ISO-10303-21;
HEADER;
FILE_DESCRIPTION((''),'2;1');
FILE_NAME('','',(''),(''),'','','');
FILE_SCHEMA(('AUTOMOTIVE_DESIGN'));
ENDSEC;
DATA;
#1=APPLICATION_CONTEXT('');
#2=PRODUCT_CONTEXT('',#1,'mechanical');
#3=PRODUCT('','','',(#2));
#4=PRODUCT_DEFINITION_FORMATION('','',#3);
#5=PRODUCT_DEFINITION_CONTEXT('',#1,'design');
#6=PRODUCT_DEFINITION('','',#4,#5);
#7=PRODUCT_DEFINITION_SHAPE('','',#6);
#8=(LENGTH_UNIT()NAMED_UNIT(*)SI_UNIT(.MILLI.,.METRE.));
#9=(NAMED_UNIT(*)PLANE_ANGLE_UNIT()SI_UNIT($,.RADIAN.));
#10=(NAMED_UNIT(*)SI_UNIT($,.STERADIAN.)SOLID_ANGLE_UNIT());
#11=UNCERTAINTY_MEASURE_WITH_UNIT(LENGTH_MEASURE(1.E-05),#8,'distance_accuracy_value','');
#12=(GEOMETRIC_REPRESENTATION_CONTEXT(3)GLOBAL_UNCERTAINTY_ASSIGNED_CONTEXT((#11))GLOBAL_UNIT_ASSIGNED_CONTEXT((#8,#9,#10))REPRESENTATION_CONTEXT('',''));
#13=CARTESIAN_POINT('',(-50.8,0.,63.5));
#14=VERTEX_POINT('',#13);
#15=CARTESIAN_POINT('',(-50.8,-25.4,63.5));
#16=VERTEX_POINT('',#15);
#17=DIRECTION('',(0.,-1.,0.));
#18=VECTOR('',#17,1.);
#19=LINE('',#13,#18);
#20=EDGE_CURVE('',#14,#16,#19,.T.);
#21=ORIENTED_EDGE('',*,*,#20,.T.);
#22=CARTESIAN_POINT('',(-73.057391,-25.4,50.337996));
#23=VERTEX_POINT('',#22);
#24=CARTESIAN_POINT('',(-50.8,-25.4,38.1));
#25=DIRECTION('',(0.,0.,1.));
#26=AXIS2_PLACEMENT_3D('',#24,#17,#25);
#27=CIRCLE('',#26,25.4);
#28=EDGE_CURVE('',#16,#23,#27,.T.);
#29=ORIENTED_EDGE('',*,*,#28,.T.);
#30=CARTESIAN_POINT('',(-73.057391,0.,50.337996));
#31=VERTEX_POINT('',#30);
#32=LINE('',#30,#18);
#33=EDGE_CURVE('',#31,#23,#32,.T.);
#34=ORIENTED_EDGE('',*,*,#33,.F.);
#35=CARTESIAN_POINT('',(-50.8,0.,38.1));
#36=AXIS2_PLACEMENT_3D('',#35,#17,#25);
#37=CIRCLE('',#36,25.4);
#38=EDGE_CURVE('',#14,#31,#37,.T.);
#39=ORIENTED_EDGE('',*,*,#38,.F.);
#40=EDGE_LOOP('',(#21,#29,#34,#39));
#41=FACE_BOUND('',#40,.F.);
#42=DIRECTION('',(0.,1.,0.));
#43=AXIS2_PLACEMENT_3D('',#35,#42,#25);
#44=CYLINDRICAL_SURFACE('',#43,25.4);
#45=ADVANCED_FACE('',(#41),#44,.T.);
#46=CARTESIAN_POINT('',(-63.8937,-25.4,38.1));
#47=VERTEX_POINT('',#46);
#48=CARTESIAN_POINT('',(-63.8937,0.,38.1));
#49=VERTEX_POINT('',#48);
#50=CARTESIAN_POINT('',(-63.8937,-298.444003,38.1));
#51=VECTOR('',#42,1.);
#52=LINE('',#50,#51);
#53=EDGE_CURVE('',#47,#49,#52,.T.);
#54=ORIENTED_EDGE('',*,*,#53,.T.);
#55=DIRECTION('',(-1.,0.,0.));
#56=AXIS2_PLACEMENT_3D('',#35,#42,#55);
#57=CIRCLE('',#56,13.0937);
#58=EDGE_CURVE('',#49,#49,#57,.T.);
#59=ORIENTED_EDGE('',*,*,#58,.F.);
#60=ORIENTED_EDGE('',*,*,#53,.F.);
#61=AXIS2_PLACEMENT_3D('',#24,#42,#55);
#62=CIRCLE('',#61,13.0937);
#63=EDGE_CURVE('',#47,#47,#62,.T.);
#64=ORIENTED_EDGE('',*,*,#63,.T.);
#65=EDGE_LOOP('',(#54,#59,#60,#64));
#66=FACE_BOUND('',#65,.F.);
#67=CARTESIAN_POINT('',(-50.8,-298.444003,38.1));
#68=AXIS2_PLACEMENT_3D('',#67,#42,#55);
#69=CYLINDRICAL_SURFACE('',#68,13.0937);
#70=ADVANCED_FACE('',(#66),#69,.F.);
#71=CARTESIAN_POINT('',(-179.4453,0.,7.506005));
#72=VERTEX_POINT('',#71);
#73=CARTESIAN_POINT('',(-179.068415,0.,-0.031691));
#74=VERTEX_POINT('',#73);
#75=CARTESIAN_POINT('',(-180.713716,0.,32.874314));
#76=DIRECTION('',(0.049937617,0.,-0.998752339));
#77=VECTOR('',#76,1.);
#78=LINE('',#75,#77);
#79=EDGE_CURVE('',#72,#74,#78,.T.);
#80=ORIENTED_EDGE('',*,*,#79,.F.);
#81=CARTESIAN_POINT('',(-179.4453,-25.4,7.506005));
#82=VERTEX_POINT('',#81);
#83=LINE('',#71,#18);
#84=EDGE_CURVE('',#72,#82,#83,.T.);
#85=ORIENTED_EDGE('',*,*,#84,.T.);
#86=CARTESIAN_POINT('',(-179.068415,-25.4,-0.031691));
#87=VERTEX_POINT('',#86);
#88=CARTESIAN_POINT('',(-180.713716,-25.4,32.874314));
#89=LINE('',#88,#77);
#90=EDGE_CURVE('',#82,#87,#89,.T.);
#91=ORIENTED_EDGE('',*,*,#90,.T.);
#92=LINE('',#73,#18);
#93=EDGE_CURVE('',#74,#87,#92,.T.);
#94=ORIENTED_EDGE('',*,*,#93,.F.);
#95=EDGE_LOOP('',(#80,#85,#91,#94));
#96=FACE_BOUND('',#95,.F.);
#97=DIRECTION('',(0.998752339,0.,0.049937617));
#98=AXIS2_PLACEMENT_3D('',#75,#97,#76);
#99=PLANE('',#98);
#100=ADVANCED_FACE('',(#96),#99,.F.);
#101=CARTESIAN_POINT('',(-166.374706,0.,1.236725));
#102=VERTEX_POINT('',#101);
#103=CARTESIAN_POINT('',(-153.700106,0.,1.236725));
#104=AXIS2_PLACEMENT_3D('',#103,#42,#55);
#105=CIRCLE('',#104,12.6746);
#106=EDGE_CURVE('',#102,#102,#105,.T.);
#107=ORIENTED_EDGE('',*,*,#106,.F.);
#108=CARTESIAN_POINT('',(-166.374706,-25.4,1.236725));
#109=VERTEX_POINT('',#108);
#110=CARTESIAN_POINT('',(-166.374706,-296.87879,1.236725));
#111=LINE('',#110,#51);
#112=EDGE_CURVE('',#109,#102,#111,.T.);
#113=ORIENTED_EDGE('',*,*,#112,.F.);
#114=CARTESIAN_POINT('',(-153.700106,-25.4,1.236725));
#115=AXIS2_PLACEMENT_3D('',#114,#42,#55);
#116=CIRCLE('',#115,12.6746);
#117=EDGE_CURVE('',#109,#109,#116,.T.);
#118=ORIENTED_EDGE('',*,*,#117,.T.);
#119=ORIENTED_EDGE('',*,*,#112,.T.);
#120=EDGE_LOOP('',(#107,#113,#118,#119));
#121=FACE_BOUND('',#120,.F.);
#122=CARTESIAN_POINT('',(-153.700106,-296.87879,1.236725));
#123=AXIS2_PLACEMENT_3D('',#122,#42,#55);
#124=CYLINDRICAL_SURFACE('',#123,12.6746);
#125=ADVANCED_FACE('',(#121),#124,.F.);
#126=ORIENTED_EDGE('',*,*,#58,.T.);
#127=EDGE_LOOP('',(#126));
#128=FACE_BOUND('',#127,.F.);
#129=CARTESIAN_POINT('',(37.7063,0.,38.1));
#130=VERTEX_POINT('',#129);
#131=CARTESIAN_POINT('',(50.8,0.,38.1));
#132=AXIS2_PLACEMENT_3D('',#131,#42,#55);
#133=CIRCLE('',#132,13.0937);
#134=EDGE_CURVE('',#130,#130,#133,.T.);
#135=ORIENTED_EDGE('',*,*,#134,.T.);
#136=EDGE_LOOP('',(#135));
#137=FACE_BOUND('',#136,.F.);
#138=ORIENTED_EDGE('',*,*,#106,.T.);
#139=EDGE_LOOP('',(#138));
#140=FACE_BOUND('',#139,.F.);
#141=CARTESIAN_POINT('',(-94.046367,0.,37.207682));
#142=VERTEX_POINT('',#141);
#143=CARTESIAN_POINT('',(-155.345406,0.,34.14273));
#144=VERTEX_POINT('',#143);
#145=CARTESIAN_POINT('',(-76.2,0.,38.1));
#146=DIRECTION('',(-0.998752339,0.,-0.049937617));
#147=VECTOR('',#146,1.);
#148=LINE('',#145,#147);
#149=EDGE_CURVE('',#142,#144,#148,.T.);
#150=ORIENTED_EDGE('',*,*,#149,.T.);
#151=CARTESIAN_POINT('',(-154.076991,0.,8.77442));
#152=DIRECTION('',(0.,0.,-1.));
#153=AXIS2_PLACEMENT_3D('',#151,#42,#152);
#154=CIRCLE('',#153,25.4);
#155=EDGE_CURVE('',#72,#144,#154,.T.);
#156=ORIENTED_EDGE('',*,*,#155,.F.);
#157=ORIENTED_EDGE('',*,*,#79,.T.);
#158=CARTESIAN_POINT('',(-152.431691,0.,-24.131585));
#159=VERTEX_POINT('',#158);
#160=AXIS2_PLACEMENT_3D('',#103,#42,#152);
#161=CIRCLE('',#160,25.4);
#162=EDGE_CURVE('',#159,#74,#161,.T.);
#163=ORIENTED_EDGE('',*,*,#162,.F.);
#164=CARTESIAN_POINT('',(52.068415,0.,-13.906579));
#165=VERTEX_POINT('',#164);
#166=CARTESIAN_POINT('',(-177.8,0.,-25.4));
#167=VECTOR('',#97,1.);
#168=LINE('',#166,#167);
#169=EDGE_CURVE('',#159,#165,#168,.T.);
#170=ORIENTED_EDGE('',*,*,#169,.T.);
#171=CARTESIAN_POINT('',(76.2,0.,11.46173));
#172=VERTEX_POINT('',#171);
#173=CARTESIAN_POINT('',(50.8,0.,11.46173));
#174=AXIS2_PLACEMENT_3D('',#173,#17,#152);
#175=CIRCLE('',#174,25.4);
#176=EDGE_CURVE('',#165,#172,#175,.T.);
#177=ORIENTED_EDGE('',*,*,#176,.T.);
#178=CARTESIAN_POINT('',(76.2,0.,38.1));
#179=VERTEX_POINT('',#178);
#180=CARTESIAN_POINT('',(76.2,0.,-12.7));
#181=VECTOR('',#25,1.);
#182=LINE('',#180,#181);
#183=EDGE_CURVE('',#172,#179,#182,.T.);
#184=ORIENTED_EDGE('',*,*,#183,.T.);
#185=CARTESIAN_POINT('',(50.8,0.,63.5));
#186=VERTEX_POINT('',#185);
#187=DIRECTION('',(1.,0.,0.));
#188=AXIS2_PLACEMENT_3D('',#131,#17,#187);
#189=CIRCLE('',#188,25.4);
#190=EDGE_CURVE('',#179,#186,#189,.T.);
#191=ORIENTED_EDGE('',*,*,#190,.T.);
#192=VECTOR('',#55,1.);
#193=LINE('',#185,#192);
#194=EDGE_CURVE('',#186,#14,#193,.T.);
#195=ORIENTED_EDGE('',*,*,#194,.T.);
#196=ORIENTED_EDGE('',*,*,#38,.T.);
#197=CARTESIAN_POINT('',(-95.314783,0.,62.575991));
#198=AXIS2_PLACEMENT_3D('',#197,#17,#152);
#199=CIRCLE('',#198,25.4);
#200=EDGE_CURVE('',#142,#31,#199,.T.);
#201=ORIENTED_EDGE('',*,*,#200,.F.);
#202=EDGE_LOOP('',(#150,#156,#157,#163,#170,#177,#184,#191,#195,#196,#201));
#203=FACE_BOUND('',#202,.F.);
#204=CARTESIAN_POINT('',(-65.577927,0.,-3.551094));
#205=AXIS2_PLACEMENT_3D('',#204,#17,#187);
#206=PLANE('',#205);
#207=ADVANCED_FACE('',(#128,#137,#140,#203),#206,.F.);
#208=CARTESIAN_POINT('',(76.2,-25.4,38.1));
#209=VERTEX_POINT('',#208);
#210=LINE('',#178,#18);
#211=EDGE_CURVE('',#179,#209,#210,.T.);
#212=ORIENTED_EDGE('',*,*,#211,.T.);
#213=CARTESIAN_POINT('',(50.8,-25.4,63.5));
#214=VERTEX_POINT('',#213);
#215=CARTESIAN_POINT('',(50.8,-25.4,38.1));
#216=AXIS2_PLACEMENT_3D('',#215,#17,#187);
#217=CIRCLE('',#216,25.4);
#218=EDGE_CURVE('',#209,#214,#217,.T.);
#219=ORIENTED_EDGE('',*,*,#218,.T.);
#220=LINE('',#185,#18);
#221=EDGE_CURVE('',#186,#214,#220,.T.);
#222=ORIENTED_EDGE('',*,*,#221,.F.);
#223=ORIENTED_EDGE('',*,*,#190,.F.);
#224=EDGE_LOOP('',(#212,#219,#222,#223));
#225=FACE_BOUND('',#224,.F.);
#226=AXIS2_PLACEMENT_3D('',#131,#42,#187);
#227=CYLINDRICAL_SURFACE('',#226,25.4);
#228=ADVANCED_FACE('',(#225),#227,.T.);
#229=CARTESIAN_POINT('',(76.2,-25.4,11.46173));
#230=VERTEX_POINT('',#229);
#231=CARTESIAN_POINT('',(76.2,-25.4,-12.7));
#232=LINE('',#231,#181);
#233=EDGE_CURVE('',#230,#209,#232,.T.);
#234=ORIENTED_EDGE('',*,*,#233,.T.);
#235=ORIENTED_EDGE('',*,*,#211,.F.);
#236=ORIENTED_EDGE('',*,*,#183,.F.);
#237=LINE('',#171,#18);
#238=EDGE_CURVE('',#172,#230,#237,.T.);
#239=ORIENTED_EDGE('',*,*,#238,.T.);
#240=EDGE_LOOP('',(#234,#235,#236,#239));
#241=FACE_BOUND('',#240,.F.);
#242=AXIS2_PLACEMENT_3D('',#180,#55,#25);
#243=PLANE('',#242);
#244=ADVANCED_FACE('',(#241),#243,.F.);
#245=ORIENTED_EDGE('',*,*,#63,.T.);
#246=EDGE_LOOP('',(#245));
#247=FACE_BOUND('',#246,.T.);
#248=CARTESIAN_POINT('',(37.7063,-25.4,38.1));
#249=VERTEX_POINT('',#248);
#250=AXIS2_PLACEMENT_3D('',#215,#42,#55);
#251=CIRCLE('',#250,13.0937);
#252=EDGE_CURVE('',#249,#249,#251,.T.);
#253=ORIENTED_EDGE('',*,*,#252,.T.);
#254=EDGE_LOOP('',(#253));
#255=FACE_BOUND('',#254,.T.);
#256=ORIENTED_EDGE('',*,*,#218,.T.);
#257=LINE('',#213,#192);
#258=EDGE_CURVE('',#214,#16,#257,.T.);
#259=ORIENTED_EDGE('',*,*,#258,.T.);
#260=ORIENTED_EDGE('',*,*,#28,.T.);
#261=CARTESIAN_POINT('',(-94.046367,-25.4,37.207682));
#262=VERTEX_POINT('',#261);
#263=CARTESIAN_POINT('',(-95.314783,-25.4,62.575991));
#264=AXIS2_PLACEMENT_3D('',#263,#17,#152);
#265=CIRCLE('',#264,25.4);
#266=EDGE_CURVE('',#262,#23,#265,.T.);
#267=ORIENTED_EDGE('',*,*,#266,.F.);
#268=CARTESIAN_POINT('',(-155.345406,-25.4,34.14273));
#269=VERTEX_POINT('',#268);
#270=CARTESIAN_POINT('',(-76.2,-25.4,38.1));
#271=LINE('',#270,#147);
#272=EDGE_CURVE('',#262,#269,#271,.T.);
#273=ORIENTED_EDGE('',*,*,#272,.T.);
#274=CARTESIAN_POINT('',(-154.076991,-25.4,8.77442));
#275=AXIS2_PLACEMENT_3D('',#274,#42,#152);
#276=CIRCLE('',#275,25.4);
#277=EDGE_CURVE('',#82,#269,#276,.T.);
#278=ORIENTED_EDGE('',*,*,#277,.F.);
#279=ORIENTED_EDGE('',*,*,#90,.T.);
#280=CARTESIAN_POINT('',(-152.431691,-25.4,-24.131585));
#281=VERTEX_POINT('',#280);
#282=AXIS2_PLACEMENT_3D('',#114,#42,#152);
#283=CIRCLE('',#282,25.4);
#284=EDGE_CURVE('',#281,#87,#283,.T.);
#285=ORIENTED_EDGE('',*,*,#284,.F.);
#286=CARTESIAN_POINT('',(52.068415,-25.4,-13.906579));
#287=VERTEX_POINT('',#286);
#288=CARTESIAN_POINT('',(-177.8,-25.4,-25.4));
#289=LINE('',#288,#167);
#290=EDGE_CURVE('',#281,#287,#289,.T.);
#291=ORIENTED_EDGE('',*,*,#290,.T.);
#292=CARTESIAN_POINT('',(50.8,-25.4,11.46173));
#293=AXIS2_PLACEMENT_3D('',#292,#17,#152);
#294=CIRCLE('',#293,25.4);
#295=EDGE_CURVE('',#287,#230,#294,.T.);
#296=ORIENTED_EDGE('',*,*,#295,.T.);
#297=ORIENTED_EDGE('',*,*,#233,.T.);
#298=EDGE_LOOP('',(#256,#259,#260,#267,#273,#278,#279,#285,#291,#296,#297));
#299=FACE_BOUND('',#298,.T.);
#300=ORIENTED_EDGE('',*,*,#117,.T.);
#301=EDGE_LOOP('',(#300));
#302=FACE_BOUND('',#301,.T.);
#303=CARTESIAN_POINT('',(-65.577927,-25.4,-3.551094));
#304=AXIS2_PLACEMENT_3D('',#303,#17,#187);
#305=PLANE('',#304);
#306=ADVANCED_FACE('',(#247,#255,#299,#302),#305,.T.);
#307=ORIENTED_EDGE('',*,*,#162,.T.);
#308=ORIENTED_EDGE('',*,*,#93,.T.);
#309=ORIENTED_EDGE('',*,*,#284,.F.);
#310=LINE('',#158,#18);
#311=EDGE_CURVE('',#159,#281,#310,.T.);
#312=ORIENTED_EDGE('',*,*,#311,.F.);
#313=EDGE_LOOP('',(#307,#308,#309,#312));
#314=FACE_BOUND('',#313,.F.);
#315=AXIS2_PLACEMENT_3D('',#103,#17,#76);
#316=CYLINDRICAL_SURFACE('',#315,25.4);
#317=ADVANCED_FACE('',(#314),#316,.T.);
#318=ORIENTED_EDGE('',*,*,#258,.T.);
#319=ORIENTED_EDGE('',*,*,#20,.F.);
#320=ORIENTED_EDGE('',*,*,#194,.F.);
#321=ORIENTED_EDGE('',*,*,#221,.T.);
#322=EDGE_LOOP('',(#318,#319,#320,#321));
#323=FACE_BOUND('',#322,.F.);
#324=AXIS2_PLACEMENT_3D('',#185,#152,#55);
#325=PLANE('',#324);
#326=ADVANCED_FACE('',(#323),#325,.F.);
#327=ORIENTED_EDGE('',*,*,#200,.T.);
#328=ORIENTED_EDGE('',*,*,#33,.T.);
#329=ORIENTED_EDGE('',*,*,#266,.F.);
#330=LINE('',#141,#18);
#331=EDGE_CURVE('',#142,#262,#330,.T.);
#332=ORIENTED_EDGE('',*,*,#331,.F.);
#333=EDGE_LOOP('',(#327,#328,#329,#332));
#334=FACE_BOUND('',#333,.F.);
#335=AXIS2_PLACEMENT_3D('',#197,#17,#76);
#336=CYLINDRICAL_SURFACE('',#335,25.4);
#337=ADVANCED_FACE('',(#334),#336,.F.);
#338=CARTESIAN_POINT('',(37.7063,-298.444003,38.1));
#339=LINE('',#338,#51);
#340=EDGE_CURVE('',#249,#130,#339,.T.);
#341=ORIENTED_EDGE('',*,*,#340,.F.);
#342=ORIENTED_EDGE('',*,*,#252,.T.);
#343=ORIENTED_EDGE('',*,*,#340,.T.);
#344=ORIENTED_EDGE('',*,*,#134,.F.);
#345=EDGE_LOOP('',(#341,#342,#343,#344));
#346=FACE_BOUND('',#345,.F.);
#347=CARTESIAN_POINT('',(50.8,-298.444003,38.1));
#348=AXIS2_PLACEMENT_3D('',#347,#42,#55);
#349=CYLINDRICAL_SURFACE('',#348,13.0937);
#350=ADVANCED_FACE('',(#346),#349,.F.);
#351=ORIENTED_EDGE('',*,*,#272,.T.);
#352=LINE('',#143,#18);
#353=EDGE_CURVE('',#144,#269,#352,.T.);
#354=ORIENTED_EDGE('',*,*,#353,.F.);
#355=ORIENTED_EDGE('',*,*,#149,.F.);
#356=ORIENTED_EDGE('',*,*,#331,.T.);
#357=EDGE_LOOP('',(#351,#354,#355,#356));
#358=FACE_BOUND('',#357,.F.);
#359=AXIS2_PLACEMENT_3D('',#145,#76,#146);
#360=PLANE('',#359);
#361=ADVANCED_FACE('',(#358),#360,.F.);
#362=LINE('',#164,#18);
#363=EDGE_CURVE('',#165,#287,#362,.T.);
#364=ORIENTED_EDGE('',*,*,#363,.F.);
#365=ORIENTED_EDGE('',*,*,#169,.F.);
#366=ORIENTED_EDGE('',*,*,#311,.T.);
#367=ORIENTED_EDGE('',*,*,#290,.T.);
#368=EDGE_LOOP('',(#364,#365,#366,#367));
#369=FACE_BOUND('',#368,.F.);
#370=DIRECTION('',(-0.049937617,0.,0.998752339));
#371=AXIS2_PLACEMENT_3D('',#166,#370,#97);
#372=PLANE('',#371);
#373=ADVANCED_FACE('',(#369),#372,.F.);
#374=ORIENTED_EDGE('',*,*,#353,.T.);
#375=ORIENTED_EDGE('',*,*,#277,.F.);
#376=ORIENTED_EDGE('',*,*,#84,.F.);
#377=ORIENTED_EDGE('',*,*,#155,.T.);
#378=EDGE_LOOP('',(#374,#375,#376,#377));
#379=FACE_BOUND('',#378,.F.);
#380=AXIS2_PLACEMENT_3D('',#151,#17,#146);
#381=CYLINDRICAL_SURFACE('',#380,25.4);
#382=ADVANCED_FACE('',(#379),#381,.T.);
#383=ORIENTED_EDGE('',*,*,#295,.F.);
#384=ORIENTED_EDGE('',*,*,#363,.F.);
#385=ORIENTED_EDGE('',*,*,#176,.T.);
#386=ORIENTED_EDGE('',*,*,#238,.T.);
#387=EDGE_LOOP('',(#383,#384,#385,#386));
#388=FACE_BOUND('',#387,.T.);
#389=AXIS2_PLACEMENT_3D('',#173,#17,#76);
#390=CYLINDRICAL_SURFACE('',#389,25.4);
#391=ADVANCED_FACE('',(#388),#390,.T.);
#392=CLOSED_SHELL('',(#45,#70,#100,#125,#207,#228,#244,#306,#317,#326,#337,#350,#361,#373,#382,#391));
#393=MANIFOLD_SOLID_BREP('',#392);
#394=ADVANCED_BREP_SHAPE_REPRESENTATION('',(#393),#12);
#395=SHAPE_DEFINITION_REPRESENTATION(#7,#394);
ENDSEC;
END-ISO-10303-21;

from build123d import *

# Parameters (mm, degrees)
F1_DEPTH = 25.4
F3_D     = 26.1874
F4_R     = 25.4
F7_D     = 25.3492


# Not quite as in the source:
# - a feature names something its author has since deleted; it is built from what else it names


with BuildPart() as f1:
    # F0 (on Front) → F1 (new body)
    with BuildSketch(Plane.XZ):
        Polygon((-177.8, -25.4), (76.2, -12.7), (-76.2, -12.7), (-76.2, 12.7), (-76.2, 38.1), (-180.7137157107, 32.8743142145), align=None)
        Polygon((-76.2, -12.7), (76.2, -12.7), (76.2, 12.7), (50.8, 12.7), (-50.7999999312, 12.7), (-76.2, 12.7), align=None)
        with BuildLine():
            Line((50.8, 12.7), (76.2, 12.7))
            Line((76.2, 12.7), (76.2, 38.1))
            ThreePointArc((76.2, 38.1), (68.7605122421, 20.1394877579), (50.8, 12.7))
        make_face()
        with BuildLine():
            Line((-76.2, 38.1), (-76.2, 12.7))
            Line((-76.2, 12.7), (-50.7999999312, 12.7))
            ThreePointArc((-50.7999999312, 12.7), (-68.7605122178, 20.1394877335), (-76.2, 38.1))
        make_face()
        with BuildLine():
            Line((-50.7999999312, 12.7), (50.8, 12.7))
            ThreePointArc((50.8, 12.7), (25.4, 38.1), (50.8, 63.5))
            Line((50.8, 63.5), (-50.8, 63.5))
            ThreePointArc((-50.8, 63.5), (-32.8394877579, 56.0605122421), (-25.4, 38.1))
            ThreePointArc((-25.4, 38.1), (-32.8394877335, 20.1394877822), (-50.7999999312, 12.7))
        make_face()
        with BuildLine():
            ThreePointArc((50.8, 63.5), (25.4, 38.1), (50.8, 12.7))
            ThreePointArc((50.8, 12.7), (68.7605122421, 20.1394877579), (76.2, 38.1))
            ThreePointArc((76.2, 38.1), (68.7605122421, 56.0605122421), (50.8, 63.5))
        make_face()
        with BuildLine():
            ThreePointArc((-76.2, 38.1), (-68.7605122178, 20.1394877335), (-50.7999999312, 12.7))
            ThreePointArc((-50.7999999312, 12.7), (-32.8394877335, 20.1394877822), (-25.4, 38.1))
            ThreePointArc((-25.4, 38.1), (-32.8394877579, 56.0605122421), (-50.8, 63.5))
            ThreePointArc((-50.8, 63.5), (-68.7605122421, 56.0605122421), (-76.2, 38.1))
        make_face()
    extrude(amount=F1_DEPTH)

    # F3 (through all)
    with Locations(Plane.XZ.offset(25.4)):
        with Locations((-50.8, 38.1), (50.8, 38.1)):
            Hole(F3_D / 2)

    # F4
    f4_edges = [f1.edges().sort_by_distance(p)[0] for p in [
        (76.2, -12.7, -12.7),
        (-177.8, -12.7, -25.4),
        (-76.2, -12.7, 38.1),
        (-180.713716, -12.7, 32.874314),
    ]]
    fillet(f4_edges, radius=F4_R)

    # F7 (through all)
    with Locations(Plane.XZ.offset(25.4)):
        with Locations((-153.7001060629, 1.2367248779)):
            Hole(F7_D / 2)


solid = f1.part
